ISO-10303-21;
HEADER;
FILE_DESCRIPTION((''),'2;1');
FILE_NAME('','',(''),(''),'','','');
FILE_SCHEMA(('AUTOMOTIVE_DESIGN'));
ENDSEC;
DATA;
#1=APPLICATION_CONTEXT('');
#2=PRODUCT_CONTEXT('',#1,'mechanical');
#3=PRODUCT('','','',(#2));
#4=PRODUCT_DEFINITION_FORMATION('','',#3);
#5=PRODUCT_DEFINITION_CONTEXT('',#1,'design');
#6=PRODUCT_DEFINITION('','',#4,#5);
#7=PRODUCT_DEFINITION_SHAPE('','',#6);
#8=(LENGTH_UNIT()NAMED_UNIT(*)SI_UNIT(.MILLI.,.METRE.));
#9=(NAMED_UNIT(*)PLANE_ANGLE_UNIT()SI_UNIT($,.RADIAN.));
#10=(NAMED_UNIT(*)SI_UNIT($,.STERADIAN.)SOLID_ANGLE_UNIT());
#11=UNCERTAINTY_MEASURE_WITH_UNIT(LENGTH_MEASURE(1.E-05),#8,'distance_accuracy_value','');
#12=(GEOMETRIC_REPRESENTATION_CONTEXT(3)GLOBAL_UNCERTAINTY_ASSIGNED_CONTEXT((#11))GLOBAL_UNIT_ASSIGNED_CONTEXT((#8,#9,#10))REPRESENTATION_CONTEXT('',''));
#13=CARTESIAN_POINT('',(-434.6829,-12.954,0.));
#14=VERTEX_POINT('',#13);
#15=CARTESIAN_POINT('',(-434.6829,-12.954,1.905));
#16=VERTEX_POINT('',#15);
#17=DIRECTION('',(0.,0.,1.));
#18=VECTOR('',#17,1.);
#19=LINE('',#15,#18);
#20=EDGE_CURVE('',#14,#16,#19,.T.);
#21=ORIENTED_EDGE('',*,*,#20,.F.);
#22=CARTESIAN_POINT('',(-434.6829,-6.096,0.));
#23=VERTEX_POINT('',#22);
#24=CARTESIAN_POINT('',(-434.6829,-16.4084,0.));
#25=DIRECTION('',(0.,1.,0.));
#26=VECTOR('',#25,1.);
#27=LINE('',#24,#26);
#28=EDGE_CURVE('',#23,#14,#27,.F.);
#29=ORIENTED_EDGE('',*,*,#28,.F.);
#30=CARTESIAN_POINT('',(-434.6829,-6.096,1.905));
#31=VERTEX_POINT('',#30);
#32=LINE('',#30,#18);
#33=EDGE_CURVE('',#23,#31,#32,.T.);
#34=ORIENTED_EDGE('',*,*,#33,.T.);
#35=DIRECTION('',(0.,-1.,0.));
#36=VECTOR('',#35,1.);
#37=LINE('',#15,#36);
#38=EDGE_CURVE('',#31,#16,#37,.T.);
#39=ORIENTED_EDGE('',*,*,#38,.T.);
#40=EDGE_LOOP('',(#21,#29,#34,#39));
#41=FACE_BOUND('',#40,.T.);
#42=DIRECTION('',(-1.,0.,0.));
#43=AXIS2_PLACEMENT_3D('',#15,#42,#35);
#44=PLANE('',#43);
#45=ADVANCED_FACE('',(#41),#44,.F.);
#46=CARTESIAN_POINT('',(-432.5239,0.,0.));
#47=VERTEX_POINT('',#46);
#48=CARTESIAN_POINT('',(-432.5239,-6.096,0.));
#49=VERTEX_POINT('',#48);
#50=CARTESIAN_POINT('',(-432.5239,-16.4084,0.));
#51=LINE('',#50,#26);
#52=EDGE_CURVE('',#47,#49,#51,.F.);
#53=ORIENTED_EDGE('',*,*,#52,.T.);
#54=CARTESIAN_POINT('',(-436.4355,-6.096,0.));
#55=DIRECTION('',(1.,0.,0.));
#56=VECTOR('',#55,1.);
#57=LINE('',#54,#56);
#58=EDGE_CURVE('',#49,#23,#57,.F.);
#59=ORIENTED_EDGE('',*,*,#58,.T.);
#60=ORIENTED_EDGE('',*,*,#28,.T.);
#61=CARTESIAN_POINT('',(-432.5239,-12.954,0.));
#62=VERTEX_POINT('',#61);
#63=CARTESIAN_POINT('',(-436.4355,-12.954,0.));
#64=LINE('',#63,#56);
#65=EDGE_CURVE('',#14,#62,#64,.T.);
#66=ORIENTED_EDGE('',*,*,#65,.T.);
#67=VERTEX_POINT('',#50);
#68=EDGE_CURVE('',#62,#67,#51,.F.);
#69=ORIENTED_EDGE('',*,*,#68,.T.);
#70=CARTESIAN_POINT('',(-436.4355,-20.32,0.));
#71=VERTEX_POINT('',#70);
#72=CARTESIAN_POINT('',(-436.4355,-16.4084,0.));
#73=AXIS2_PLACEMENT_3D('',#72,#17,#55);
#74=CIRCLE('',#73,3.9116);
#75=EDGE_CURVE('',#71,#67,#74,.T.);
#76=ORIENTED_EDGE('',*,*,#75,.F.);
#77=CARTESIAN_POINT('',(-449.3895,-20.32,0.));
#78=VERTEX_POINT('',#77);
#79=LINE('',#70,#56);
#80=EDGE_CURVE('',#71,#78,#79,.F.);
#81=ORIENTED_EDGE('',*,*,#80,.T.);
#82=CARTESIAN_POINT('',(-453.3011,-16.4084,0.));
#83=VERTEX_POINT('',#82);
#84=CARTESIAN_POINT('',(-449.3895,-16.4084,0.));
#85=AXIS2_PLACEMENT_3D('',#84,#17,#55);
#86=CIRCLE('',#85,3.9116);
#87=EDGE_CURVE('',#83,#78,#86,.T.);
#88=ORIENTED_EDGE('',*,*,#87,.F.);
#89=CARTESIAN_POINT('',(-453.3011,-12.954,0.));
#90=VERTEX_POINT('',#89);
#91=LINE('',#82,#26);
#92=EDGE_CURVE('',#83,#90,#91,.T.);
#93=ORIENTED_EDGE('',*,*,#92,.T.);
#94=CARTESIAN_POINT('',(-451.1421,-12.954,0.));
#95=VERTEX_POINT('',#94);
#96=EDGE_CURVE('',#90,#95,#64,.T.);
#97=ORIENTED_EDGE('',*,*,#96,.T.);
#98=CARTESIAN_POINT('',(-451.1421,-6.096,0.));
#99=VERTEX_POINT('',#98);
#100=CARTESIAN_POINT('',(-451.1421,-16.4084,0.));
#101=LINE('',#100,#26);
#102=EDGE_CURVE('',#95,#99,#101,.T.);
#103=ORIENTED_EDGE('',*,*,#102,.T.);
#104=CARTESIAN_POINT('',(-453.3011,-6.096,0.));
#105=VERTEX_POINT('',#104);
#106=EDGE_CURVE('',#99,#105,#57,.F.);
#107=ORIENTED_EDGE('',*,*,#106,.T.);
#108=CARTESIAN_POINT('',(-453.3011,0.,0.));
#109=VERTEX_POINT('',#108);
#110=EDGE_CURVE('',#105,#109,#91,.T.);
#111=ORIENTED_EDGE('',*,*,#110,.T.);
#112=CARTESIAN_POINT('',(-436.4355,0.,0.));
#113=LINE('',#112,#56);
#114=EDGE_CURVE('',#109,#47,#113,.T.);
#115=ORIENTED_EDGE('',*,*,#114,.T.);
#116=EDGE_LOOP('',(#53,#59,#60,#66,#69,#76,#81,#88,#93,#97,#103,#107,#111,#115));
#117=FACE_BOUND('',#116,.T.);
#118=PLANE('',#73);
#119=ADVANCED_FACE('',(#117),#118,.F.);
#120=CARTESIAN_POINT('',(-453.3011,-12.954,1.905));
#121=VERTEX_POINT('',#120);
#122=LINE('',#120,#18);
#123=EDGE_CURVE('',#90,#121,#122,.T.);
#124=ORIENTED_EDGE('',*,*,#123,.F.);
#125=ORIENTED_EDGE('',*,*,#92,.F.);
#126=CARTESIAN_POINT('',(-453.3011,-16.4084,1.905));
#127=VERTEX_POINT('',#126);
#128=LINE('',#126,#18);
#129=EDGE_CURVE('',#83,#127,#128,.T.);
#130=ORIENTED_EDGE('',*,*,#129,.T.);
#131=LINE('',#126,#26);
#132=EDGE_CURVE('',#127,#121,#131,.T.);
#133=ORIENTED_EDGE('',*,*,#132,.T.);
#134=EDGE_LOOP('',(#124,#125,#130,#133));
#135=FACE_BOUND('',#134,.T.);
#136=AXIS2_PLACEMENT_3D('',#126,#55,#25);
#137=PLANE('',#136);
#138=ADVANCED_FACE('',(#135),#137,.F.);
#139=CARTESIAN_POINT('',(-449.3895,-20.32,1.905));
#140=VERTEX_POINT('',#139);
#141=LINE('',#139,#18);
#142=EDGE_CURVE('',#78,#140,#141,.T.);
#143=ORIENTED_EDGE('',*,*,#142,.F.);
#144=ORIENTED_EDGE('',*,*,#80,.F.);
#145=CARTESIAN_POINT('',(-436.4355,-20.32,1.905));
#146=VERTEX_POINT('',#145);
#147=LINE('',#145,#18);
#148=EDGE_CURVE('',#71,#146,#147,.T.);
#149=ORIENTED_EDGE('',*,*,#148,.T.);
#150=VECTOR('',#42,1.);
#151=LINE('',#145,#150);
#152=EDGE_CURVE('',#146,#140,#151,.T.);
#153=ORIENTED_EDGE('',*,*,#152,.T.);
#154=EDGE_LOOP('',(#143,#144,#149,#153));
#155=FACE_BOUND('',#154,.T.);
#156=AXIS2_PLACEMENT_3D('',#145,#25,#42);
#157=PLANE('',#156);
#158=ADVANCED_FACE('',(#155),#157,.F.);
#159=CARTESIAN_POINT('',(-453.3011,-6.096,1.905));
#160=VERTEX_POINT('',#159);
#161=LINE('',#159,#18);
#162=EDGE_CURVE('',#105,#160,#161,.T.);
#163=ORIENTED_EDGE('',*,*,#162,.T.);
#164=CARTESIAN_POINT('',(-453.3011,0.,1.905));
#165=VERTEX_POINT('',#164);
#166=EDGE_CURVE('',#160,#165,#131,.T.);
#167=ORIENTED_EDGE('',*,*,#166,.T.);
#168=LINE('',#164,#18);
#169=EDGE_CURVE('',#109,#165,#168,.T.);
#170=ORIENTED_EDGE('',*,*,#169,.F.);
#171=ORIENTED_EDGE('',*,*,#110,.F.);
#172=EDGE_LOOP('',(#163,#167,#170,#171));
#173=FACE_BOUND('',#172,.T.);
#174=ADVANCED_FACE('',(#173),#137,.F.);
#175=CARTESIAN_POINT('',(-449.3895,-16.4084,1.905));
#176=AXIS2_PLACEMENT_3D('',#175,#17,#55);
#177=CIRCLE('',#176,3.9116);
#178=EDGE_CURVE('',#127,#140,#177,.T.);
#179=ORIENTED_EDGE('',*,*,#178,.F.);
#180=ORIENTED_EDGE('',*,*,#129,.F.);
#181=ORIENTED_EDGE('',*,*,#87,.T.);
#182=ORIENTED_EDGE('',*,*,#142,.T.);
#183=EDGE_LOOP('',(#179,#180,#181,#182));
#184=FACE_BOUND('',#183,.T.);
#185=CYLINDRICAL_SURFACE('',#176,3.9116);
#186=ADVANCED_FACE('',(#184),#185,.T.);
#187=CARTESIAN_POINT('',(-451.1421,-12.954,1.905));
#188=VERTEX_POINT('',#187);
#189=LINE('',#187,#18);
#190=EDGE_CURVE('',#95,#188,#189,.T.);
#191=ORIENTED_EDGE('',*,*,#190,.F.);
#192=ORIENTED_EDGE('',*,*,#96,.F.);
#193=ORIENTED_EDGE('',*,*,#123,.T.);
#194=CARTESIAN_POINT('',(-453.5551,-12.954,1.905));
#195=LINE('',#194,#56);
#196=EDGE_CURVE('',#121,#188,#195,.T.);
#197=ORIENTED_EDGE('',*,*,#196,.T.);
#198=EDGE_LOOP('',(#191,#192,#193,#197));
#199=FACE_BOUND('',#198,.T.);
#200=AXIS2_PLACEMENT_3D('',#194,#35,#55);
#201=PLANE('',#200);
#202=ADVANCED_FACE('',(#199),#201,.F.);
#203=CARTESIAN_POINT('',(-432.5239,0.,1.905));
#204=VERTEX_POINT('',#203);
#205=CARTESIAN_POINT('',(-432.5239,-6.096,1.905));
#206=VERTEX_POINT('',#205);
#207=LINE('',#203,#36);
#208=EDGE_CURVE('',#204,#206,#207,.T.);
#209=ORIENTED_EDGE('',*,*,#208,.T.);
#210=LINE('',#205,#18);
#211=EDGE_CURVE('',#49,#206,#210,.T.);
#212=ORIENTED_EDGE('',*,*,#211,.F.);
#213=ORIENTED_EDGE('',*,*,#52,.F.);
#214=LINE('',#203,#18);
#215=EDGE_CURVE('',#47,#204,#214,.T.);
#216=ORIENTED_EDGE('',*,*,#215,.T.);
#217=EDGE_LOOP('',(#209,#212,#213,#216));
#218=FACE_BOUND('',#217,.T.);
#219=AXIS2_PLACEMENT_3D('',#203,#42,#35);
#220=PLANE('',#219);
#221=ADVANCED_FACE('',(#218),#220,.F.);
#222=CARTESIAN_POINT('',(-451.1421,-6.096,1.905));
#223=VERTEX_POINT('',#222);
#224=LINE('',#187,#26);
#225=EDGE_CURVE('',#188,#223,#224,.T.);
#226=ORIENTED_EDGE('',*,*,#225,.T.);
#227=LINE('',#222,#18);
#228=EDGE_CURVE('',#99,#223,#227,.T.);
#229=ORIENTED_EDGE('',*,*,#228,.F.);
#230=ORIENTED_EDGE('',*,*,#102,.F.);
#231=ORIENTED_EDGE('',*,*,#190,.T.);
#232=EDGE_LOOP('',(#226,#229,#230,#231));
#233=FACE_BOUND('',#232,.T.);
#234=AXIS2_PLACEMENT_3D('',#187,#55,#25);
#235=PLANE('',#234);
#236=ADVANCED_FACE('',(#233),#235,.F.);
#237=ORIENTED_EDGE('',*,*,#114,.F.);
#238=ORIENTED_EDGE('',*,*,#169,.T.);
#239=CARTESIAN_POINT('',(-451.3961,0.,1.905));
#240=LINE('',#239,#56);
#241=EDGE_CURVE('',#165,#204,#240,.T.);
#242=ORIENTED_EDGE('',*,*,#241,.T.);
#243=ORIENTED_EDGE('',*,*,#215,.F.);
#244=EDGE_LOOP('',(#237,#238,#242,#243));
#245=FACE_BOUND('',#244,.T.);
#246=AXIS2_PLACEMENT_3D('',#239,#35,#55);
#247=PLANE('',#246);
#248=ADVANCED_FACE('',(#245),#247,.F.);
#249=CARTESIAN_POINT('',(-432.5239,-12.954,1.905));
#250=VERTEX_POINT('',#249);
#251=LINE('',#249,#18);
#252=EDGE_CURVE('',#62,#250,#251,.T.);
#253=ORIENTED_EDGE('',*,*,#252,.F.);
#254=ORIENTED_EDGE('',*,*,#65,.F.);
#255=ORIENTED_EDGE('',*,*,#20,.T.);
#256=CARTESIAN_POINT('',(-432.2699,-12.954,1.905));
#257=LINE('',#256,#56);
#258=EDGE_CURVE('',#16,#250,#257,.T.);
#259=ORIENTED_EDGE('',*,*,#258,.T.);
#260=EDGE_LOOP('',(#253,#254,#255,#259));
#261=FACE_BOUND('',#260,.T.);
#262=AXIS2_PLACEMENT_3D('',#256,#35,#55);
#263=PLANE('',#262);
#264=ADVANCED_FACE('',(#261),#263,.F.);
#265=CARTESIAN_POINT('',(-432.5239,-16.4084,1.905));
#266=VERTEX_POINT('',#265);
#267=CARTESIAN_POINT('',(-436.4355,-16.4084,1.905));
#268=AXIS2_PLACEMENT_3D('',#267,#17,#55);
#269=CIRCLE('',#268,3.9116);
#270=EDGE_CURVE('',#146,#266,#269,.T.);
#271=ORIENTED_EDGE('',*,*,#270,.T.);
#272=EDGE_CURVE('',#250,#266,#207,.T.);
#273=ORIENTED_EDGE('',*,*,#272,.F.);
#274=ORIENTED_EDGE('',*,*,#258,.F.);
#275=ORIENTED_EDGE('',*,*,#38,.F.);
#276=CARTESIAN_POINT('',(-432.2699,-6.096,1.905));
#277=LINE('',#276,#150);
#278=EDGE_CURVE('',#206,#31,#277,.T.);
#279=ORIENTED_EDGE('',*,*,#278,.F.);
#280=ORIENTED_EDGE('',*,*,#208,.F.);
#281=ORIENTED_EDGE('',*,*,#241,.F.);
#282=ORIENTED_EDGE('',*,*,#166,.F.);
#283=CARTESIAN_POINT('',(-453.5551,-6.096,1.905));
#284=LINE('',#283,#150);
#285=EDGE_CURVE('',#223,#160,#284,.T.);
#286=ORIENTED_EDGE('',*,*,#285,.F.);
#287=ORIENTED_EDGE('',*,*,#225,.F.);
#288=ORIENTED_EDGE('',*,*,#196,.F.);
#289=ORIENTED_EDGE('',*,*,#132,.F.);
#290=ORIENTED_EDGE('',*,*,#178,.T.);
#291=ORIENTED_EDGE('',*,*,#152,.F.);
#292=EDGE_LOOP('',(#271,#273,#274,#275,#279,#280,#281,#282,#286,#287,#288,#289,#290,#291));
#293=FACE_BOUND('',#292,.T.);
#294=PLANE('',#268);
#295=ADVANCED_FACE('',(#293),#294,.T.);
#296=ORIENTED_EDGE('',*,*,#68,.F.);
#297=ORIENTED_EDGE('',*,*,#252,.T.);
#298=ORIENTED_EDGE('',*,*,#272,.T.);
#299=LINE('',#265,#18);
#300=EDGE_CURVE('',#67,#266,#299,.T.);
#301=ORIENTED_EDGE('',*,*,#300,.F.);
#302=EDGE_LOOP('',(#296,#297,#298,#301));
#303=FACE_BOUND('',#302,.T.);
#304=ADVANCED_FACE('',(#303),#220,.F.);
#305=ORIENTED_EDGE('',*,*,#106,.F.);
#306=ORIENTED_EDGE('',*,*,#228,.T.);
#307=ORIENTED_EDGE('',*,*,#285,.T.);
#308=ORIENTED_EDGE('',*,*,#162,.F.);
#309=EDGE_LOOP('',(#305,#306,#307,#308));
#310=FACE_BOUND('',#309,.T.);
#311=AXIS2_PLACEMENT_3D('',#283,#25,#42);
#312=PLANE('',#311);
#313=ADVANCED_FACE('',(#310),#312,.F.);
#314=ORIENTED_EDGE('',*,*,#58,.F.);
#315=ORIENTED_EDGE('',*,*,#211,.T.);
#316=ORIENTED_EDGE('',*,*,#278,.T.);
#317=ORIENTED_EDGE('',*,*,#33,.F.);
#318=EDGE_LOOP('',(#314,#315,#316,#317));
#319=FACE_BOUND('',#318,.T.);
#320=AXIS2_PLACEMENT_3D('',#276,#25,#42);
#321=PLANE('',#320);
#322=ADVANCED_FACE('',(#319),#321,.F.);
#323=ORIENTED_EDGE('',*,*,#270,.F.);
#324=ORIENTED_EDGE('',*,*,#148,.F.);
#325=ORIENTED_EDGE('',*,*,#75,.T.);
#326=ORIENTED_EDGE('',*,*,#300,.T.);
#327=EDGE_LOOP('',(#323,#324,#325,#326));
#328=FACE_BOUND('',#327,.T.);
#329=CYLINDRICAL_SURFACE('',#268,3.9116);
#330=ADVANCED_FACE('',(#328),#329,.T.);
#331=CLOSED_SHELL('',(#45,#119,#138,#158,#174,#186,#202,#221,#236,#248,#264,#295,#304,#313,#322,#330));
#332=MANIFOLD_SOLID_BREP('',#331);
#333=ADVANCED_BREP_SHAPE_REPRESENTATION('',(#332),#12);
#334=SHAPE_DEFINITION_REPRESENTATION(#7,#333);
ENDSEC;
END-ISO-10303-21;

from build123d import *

# Parameters (mm, degrees)
BOSS_EXTRUDE1_DEPTH = 1.905
SKETCH2_W           = 2.413
SKETCH2_H           = 6.858
CUT_EXTRUDE1_DEPTH  = 454.76030973


with BuildPart() as part:
    # Sketch1 → Boss-Extrude1 (new body)
    with BuildSketch(Plane.XY):
        with BuildLine():
            Line((-434.4289, 0), (-432.5239, 0))
            Line((-432.5239, 0), (-432.5239, -6.35))
            Line((-432.5239, -6.35), (-432.5239, -12.7))
            Line((-432.5239, -12.7), (-432.5239, -16.4084))
            ThreePointArc((-432.5239, -16.4084), (-433.669581115, -19.174318885), (-436.4355, -20.32))
            Line((-436.4355, -20.32), (-449.3895, -20.32))
            ThreePointArc((-449.3895, -20.32), (-452.155418885, -19.174318885), (-453.3011, -16.4084))
            Line((-453.3011, -16.4084), (-453.3011, -12.7))
            Line((-453.3011, -12.7), (-453.3011, -6.35))
            Line((-453.3011, -6.35), (-453.3011, 0))
            Line((-453.3011, 0), (-451.3961, 0))
            Line((-451.3961, 0), (-434.4289, 0))
        make_face()
    extrude(amount=BOSS_EXTRUDE1_DEPTH)

    # Sketch2 → Cut-Extrude1 (cut, through all)
    with BuildSketch(Plane.XY.offset(1.905)):
        with Locations((-433.4764, -9.525)):
            Rectangle(SKETCH2_W, SKETCH2_H)
        with Locations((-452.3486, -9.525)):
            Rectangle(SKETCH2_W, SKETCH2_H)
    extrude(amount=-CUT_EXTRUDE1_DEPTH, mode=Mode.SUBTRACT)


solid = part.part
